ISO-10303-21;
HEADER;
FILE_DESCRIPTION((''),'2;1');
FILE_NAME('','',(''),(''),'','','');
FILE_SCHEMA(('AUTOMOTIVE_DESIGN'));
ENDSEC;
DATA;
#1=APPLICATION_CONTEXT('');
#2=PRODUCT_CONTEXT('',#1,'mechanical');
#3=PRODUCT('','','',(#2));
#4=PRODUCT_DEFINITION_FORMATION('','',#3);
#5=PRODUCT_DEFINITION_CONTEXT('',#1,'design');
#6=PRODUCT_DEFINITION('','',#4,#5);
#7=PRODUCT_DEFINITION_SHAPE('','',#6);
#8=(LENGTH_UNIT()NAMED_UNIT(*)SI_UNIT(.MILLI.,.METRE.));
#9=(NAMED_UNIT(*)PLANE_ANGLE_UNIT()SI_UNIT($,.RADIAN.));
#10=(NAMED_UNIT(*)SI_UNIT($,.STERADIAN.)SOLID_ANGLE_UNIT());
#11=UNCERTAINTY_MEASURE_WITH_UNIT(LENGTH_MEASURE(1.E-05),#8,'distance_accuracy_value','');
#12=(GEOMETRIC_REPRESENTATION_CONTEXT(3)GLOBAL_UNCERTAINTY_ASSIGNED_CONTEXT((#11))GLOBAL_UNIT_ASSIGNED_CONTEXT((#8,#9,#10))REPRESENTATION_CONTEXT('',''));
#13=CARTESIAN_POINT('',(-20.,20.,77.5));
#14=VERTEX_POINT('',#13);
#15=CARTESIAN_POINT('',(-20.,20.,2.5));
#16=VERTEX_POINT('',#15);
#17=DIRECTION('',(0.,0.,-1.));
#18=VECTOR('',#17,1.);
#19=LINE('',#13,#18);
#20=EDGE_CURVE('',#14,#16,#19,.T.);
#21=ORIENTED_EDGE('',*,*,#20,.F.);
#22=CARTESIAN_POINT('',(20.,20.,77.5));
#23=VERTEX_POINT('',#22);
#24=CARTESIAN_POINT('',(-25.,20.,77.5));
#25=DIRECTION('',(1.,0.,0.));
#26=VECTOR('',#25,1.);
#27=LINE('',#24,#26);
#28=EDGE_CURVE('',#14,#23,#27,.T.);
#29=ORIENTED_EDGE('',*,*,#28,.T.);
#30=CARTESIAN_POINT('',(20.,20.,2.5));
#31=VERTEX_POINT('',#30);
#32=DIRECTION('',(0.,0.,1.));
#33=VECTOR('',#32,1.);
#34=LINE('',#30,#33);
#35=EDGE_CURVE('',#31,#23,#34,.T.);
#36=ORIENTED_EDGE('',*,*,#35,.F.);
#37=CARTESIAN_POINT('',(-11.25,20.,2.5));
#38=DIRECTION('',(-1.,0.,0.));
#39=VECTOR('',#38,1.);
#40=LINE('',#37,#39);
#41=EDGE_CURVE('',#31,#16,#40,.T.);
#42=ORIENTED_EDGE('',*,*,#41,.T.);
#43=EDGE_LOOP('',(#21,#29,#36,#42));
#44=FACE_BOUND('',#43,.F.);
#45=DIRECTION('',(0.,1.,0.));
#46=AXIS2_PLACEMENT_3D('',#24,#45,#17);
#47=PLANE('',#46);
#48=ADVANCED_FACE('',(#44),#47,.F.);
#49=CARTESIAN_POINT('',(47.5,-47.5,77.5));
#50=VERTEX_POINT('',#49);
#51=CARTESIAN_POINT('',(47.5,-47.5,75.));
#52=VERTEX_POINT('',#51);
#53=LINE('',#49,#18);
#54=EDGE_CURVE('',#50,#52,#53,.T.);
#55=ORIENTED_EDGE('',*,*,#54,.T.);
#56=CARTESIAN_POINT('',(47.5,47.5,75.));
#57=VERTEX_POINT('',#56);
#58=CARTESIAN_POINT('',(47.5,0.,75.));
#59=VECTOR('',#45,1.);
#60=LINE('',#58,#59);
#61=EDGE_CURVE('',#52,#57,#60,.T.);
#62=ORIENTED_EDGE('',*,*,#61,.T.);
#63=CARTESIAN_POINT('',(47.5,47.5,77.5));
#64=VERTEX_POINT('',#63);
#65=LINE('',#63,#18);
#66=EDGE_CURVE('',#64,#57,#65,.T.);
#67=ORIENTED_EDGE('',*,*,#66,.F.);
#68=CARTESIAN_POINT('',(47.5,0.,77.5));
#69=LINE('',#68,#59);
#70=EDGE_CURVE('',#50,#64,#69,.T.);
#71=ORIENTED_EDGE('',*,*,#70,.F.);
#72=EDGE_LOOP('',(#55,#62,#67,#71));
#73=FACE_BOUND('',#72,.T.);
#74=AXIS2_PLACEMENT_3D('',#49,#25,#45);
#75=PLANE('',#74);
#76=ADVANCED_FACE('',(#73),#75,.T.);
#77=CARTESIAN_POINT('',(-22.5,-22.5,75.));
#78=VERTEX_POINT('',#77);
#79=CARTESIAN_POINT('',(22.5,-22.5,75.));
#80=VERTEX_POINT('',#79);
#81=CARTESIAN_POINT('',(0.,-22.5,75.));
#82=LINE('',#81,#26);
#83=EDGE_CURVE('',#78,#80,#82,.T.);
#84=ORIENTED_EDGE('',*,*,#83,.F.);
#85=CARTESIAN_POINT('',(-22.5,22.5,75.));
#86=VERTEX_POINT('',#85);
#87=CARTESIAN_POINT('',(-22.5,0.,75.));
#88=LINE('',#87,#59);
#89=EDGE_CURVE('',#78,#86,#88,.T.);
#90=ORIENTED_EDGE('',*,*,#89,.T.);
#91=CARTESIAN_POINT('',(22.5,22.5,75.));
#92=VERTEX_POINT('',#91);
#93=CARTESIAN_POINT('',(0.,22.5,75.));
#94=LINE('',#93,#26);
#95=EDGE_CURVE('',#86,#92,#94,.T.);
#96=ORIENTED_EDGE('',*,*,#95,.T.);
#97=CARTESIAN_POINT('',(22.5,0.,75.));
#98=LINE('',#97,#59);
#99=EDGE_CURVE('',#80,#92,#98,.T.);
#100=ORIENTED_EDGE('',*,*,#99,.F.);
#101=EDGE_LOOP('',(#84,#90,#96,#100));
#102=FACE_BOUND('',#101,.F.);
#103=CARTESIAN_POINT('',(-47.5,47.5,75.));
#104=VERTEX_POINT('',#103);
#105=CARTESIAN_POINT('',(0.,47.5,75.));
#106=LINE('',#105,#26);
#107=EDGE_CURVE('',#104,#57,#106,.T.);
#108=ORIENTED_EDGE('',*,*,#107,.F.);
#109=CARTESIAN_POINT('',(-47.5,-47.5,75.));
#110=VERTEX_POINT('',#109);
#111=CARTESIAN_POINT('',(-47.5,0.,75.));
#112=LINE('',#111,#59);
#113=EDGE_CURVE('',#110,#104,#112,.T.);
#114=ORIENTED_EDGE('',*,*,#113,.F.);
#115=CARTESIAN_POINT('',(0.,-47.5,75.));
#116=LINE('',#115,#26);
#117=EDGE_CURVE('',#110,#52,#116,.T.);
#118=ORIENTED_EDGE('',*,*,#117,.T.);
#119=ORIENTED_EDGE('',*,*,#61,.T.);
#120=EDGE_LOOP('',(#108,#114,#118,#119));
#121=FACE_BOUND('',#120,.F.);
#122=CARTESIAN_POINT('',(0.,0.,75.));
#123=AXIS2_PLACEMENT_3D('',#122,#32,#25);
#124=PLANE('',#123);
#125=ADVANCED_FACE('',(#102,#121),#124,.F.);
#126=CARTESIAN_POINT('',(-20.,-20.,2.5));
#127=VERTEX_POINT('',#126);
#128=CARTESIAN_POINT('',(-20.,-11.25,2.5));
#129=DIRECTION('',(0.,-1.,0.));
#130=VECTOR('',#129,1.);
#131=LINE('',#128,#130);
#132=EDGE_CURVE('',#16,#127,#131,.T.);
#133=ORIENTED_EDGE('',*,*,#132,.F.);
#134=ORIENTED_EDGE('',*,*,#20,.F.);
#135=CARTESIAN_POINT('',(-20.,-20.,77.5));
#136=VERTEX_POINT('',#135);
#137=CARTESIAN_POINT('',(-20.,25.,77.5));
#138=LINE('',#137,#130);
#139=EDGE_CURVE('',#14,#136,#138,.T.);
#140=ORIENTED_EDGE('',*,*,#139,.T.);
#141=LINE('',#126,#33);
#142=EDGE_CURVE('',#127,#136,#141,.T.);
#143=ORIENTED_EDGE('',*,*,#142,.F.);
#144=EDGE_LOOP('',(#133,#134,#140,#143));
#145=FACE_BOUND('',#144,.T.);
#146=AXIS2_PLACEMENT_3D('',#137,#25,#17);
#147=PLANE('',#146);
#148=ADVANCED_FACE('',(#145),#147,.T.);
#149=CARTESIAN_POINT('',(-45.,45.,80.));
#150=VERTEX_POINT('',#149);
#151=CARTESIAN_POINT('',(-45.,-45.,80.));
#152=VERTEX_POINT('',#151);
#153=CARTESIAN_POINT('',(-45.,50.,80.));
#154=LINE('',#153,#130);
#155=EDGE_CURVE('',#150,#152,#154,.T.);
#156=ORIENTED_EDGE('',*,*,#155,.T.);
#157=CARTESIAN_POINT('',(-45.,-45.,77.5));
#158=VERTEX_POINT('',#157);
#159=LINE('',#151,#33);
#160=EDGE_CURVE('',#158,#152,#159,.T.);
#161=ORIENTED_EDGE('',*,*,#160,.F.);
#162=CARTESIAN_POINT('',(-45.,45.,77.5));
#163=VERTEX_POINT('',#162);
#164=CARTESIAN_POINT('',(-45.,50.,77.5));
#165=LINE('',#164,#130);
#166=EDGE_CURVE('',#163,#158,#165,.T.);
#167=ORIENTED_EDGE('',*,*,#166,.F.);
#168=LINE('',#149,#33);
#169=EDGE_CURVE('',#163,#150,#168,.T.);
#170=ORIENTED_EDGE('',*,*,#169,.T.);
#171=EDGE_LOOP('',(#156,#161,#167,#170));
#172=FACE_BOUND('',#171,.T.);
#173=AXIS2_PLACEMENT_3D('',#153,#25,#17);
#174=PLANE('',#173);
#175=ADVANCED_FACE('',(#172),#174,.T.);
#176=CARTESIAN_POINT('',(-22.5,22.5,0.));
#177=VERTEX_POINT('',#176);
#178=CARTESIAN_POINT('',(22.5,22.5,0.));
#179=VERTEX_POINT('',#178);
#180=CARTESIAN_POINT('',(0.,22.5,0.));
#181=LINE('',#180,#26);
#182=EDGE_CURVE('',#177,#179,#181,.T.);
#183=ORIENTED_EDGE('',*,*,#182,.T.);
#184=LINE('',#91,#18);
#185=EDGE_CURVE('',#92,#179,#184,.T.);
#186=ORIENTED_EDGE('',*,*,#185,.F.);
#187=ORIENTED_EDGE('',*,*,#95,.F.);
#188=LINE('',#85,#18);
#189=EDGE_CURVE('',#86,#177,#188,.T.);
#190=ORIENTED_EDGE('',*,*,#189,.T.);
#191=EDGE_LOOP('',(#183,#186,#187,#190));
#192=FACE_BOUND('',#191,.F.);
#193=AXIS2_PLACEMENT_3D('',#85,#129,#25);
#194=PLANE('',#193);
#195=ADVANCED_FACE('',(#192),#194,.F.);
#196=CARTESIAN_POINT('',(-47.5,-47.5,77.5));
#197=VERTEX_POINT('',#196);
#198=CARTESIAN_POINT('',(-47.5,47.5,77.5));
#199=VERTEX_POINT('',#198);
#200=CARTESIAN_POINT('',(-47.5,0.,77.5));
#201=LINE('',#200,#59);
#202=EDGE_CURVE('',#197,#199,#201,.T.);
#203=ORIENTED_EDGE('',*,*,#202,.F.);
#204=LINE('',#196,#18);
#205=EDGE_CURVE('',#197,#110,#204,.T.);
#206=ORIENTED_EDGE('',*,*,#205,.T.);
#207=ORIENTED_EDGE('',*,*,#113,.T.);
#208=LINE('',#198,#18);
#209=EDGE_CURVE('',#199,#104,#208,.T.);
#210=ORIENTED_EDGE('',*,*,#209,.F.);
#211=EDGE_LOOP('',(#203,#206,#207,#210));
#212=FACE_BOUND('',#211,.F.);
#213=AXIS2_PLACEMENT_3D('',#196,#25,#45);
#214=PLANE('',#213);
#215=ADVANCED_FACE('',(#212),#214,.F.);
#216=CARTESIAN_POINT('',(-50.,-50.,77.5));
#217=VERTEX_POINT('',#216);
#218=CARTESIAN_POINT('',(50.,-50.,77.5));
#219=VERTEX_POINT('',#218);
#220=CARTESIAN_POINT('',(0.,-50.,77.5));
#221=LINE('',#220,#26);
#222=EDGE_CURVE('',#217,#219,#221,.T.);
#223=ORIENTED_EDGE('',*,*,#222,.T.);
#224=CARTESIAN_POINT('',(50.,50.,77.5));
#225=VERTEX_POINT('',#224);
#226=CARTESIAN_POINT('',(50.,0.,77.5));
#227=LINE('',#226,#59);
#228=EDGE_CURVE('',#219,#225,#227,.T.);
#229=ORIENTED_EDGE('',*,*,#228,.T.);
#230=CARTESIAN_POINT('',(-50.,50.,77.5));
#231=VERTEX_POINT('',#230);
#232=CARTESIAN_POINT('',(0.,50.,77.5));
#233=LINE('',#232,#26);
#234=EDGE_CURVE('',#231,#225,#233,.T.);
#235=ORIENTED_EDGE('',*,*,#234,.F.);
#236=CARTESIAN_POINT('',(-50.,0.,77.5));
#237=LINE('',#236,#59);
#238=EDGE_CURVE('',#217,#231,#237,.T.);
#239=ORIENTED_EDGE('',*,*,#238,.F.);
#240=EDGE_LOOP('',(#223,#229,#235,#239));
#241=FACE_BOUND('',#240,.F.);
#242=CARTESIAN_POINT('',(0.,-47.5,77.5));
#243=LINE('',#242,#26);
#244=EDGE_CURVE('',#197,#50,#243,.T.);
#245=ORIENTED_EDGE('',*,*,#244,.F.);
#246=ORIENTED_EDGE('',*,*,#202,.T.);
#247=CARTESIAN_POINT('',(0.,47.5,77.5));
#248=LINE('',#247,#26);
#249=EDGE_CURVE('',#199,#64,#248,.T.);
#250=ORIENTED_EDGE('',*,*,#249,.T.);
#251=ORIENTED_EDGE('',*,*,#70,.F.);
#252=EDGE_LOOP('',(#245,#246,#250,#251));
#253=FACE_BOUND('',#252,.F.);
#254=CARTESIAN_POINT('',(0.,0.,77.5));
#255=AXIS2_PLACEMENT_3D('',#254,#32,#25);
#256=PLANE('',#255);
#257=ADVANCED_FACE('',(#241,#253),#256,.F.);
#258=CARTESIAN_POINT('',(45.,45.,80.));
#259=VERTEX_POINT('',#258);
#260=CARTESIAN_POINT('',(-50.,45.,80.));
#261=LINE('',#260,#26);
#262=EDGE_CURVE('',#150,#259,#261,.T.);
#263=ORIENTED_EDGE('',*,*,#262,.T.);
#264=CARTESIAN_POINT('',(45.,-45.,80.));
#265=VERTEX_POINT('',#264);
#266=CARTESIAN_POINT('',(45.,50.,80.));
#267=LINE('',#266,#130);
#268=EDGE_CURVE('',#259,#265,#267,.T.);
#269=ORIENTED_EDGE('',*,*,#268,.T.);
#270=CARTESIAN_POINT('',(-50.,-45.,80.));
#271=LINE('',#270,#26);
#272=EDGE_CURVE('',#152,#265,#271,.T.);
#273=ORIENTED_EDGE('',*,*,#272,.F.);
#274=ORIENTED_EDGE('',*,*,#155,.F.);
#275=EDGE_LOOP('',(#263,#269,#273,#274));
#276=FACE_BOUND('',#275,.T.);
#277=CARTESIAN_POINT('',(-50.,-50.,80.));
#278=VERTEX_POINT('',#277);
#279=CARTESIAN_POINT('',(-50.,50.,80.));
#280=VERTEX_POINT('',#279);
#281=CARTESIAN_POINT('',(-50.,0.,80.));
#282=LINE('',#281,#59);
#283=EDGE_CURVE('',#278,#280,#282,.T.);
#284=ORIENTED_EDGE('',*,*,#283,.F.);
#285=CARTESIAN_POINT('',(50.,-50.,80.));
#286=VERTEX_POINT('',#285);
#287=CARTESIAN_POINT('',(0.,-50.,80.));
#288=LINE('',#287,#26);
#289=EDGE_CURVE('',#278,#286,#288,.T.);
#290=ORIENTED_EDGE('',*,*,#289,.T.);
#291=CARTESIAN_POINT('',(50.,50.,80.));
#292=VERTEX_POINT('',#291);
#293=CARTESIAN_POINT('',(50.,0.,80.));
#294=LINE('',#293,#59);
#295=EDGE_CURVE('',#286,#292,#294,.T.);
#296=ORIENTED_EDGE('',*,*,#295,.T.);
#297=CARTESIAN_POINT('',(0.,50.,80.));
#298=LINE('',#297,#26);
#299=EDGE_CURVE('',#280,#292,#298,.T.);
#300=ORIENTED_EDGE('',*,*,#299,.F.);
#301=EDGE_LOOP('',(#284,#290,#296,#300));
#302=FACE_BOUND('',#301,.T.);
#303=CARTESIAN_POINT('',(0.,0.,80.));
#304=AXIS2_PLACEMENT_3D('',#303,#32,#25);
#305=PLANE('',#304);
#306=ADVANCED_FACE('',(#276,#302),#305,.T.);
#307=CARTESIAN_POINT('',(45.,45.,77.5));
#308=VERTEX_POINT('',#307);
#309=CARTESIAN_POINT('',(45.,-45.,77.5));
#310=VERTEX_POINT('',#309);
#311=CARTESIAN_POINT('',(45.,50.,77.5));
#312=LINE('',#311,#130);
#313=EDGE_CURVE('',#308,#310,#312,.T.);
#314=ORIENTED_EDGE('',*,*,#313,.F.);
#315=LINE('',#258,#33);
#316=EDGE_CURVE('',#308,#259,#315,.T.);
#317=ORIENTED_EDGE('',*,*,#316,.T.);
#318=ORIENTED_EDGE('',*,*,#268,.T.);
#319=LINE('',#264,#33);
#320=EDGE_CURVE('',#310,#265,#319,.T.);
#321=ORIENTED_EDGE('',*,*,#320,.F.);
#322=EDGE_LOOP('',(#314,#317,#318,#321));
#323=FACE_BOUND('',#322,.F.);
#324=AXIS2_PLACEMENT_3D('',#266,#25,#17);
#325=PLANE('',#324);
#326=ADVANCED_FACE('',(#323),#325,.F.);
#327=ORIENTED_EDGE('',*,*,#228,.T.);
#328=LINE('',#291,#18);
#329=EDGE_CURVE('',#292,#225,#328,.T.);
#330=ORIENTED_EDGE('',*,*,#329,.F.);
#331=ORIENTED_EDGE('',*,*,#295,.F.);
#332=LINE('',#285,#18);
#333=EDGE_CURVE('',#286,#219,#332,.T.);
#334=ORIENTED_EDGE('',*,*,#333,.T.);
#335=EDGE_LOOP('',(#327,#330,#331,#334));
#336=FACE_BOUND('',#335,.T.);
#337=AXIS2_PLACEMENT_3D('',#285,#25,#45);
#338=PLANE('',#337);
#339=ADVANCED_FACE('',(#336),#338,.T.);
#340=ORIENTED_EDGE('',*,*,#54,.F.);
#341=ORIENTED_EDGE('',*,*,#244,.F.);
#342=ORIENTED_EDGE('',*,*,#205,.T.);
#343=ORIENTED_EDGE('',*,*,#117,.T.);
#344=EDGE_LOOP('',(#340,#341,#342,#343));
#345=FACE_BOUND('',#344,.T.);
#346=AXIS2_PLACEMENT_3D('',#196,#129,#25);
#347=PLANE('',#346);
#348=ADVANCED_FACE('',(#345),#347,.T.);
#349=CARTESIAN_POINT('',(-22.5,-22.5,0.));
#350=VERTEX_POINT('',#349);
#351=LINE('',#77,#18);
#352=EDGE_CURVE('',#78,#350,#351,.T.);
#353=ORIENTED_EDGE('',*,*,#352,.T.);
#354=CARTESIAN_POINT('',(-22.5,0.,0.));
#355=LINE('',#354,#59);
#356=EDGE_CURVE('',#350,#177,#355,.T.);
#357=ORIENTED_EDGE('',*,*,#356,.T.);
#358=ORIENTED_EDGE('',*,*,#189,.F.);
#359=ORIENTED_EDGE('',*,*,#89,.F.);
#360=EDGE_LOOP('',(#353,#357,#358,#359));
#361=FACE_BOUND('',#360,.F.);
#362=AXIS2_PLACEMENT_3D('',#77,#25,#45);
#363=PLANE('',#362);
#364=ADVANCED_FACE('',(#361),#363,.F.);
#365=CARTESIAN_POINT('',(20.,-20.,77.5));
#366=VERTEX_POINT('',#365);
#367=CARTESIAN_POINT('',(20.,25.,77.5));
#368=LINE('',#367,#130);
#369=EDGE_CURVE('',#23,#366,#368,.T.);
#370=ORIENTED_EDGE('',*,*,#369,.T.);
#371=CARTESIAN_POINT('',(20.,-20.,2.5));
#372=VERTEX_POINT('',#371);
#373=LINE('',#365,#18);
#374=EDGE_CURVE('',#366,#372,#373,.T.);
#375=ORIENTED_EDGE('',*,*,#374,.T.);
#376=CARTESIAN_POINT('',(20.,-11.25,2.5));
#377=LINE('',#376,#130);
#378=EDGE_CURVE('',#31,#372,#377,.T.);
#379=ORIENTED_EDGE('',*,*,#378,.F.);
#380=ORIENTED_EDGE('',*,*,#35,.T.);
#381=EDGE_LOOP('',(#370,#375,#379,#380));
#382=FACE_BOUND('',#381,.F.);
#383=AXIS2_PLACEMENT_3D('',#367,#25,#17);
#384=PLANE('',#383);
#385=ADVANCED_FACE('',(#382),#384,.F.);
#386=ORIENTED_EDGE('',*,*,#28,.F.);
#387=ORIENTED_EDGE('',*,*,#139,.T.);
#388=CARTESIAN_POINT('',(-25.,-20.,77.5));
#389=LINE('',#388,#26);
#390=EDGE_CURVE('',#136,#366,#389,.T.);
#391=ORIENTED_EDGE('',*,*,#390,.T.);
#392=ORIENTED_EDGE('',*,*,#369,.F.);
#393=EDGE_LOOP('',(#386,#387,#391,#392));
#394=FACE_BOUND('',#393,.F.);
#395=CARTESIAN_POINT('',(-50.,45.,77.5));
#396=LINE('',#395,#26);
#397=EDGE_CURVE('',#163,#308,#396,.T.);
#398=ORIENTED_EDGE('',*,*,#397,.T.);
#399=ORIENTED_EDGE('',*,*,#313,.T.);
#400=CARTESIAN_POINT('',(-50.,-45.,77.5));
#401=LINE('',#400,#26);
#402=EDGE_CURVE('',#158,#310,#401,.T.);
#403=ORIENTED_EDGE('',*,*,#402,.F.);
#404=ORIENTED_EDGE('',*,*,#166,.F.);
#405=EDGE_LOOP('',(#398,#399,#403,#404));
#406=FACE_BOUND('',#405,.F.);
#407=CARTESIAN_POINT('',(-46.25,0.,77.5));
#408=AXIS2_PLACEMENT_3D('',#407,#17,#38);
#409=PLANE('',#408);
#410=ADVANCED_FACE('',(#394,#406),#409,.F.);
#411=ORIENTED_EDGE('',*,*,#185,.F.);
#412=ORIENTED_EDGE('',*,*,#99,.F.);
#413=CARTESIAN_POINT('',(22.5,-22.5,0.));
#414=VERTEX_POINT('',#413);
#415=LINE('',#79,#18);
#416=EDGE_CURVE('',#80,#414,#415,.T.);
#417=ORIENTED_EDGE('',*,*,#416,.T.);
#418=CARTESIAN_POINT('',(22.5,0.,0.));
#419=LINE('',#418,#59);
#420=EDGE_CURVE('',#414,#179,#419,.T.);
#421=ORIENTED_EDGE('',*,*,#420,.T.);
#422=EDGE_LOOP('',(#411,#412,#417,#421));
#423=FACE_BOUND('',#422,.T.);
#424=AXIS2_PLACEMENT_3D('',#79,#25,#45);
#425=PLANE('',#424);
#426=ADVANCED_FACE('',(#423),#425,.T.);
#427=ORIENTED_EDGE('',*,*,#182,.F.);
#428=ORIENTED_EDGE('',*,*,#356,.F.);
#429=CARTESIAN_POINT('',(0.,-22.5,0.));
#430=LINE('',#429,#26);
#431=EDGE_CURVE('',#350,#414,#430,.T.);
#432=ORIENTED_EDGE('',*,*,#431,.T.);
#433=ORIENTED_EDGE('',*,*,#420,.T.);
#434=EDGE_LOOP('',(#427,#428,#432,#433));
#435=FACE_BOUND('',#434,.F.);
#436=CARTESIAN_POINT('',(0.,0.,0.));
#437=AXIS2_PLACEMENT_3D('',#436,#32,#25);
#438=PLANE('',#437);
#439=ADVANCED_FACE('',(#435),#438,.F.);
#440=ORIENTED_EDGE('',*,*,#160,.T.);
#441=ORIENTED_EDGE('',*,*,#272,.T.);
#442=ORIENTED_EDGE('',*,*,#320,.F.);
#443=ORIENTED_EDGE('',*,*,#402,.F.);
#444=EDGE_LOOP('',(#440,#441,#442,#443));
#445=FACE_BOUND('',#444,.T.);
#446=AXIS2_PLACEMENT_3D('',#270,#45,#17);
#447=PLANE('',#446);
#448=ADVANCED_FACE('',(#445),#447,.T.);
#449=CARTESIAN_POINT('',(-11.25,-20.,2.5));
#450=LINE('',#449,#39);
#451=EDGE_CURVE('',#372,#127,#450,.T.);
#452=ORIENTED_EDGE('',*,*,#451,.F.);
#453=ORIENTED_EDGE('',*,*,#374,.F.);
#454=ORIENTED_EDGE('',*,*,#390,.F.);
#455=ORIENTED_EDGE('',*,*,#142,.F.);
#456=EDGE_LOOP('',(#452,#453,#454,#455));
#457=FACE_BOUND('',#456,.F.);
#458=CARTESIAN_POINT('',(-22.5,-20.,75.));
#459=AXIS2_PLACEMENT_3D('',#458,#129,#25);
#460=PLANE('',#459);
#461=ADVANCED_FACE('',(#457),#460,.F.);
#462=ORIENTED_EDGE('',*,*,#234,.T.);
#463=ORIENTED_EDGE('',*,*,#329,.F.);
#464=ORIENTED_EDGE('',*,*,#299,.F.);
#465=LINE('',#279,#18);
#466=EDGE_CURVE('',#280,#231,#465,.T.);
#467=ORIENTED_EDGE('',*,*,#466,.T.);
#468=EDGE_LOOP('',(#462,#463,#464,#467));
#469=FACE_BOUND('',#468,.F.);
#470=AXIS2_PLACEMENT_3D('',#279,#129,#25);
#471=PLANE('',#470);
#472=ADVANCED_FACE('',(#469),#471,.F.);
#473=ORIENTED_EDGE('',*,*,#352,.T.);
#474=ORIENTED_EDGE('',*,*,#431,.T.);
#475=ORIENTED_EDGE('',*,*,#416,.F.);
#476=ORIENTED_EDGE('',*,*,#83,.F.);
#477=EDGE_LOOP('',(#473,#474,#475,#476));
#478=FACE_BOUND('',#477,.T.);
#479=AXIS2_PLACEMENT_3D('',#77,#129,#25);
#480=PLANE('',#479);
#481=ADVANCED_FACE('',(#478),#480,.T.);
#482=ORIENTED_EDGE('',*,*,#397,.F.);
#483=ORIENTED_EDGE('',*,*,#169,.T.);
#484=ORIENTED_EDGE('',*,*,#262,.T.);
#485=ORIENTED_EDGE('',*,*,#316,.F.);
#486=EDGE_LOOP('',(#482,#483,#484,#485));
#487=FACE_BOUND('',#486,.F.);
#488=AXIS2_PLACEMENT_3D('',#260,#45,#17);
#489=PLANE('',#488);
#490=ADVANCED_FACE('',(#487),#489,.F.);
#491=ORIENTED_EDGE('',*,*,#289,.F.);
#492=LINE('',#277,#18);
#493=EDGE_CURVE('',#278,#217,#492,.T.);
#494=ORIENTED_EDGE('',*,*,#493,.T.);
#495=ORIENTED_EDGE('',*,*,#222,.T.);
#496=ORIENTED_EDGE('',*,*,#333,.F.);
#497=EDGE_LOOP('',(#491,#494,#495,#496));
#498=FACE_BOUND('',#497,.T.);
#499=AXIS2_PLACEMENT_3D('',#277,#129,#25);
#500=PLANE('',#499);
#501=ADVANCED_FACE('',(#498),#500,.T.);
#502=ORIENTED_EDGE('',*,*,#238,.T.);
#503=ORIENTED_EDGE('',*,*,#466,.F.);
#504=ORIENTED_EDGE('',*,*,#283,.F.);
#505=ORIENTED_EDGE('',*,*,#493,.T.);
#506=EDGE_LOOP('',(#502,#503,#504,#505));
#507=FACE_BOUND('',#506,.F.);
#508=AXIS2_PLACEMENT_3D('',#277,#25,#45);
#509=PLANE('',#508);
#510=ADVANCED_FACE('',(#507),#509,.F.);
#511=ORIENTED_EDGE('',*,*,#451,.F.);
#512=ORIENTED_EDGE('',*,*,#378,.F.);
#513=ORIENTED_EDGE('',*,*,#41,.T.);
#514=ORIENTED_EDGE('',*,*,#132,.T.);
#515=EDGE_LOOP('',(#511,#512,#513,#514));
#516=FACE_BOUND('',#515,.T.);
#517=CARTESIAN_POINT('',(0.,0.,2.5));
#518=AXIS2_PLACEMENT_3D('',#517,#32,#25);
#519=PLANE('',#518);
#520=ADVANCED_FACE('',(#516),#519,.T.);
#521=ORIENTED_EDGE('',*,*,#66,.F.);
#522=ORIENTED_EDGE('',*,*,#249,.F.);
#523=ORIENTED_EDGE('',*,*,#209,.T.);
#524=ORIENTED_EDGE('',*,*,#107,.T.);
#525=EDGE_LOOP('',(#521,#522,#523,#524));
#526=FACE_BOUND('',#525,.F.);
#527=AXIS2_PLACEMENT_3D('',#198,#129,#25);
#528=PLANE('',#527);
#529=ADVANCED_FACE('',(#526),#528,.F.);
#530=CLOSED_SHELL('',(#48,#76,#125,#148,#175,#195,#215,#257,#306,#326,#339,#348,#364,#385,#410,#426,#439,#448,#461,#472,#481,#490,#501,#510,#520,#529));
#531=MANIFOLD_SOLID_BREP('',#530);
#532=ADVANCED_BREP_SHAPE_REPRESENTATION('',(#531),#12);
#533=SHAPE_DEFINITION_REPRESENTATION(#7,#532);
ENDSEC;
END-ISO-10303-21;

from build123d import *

# Parameters (mm, degrees)
F1_W        = 100
F1_H        = 100
F2_DEPTH    = 2.5
F4_W        = 95
F4_H        = 95
F5_DEPTH    = 2.5
F7_W        = 45
F7_H        = 45
F8_DEPTH    = 75
F9_T        = 2.5
F9_T3_DEPTH = 100
F9_T5_DEPTH = 100
F9_T7_DEPTH = 50
F9_T9_DEPTH = 50


# Not quite as in the source:
# - a shell that OpenCascade refuses in one call is made with other operations: the cavity is built on its own and cut out


with BuildPart() as f2:
    # F1 (on offset) → F2 (new body)
    with BuildSketch(Plane.XY.offset(80)):
        Rectangle(F1_W, F1_H)
    extrude(amount=-F2_DEPTH)

    # F4 (on offset) → F5 (join)
    with BuildSketch(Plane.XY.offset(77.5)):
        Rectangle(F4_W, F4_H)
    extrude(amount=-F5_DEPTH)

    # F7 (on offset) → F8 (join)
    with BuildSketch(Plane.XY.offset(75)):
        Rectangle(F7_W, F7_H)
    extrude(amount=-F8_DEPTH)

    # F9: shell of thickness 2.5, made by hand


with BuildPart() as f9_core1:
    # F9_t2: copy of F2
    add(f2.part)

    # the walls: a layer under each face that stays
    f9_faces = [f9_core1.faces().sort_by_distance(p)[0] for p in [
        (0, 50, 78.75),
        (50, 0, 78.75),
        (-50, 0, 78.75),
        (34.375, -48.7654320988, 77.5),
        (0, -50, 78.75),
        (-47.5, 0, 76.25),
        (0, -47.5, 76.25),
        (47.5, 0, 76.25),
        (0, 47.5, 76.25),
        (-31.6666666667, -31.6666666667, 75),
        (-22.5, 0, 37.5),
        (0, -22.5, 37.5),
        (22.5, 0, 37.5),
        (0, 22.5, 37.5),
        (0, 0, 0),
    ]]
    thicken(f9_faces, amount=-F9_T, mode=Mode.SUBTRACT)

    # F9_s4 → F9_t3 (cut)
    with BuildSketch(Plane.XZ.offset(-50)):
        Polygon((-47.525, 77.475), (-47.5, 80), (-45, 80), (-45, 77.5), align=None)
        Polygon((47.525, 77.475), (47.5, 80), (45, 80), (45, 77.5), align=None)
    extrude(amount=F9_T3_DEPTH, mode=Mode.SUBTRACT)

    # F9_s6 → F9_t5 (cut)
    with BuildSketch(Plane.YZ.offset(-50)):
        Polygon((-47.525, 77.475), (-47.5, 80), (-45, 80), (-45, 77.5), align=None)
        Polygon((47.525, 77.475), (47.5, 80), (45, 80), (45, 77.5), align=None)
    extrude(amount=F9_T5_DEPTH, mode=Mode.SUBTRACT)

    # F9_s8 → F9_t7 (cut)
    with BuildSketch(Plane.XZ.offset(-25)):
        Polygon((-22.525, 74.975), (-22.5, 77.5), (-20, 77.5), (-20, 75), align=None)
        Polygon((22.525, 74.975), (22.5, 77.5), (20, 77.5), (20, 75), align=None)
    extrude(amount=F9_T7_DEPTH, mode=Mode.SUBTRACT)

    # F9_s10 → F9_t9 (cut)
    with BuildSketch(Plane.YZ.offset(-25)):
        Polygon((-22.525, 74.975), (-22.5, 77.5), (-20, 77.5), (-20, 75), align=None)
        Polygon((22.525, 74.975), (22.5, 77.5), (20, 77.5), (20, 75), align=None)
    extrude(amount=F9_T9_DEPTH, mode=Mode.SUBTRACT)


with BuildPart() as f2_1:
    add(f2.part)

    # what is left inside the walls is the cavity
    f9_cavity = [f9_core1.part.solids().sort_by_distance(p)[0] for p in [
        (0, -15, 79.975),
    ]]
    add(f9_cavity, mode=Mode.SUBTRACT)


solid = f2_1.part
